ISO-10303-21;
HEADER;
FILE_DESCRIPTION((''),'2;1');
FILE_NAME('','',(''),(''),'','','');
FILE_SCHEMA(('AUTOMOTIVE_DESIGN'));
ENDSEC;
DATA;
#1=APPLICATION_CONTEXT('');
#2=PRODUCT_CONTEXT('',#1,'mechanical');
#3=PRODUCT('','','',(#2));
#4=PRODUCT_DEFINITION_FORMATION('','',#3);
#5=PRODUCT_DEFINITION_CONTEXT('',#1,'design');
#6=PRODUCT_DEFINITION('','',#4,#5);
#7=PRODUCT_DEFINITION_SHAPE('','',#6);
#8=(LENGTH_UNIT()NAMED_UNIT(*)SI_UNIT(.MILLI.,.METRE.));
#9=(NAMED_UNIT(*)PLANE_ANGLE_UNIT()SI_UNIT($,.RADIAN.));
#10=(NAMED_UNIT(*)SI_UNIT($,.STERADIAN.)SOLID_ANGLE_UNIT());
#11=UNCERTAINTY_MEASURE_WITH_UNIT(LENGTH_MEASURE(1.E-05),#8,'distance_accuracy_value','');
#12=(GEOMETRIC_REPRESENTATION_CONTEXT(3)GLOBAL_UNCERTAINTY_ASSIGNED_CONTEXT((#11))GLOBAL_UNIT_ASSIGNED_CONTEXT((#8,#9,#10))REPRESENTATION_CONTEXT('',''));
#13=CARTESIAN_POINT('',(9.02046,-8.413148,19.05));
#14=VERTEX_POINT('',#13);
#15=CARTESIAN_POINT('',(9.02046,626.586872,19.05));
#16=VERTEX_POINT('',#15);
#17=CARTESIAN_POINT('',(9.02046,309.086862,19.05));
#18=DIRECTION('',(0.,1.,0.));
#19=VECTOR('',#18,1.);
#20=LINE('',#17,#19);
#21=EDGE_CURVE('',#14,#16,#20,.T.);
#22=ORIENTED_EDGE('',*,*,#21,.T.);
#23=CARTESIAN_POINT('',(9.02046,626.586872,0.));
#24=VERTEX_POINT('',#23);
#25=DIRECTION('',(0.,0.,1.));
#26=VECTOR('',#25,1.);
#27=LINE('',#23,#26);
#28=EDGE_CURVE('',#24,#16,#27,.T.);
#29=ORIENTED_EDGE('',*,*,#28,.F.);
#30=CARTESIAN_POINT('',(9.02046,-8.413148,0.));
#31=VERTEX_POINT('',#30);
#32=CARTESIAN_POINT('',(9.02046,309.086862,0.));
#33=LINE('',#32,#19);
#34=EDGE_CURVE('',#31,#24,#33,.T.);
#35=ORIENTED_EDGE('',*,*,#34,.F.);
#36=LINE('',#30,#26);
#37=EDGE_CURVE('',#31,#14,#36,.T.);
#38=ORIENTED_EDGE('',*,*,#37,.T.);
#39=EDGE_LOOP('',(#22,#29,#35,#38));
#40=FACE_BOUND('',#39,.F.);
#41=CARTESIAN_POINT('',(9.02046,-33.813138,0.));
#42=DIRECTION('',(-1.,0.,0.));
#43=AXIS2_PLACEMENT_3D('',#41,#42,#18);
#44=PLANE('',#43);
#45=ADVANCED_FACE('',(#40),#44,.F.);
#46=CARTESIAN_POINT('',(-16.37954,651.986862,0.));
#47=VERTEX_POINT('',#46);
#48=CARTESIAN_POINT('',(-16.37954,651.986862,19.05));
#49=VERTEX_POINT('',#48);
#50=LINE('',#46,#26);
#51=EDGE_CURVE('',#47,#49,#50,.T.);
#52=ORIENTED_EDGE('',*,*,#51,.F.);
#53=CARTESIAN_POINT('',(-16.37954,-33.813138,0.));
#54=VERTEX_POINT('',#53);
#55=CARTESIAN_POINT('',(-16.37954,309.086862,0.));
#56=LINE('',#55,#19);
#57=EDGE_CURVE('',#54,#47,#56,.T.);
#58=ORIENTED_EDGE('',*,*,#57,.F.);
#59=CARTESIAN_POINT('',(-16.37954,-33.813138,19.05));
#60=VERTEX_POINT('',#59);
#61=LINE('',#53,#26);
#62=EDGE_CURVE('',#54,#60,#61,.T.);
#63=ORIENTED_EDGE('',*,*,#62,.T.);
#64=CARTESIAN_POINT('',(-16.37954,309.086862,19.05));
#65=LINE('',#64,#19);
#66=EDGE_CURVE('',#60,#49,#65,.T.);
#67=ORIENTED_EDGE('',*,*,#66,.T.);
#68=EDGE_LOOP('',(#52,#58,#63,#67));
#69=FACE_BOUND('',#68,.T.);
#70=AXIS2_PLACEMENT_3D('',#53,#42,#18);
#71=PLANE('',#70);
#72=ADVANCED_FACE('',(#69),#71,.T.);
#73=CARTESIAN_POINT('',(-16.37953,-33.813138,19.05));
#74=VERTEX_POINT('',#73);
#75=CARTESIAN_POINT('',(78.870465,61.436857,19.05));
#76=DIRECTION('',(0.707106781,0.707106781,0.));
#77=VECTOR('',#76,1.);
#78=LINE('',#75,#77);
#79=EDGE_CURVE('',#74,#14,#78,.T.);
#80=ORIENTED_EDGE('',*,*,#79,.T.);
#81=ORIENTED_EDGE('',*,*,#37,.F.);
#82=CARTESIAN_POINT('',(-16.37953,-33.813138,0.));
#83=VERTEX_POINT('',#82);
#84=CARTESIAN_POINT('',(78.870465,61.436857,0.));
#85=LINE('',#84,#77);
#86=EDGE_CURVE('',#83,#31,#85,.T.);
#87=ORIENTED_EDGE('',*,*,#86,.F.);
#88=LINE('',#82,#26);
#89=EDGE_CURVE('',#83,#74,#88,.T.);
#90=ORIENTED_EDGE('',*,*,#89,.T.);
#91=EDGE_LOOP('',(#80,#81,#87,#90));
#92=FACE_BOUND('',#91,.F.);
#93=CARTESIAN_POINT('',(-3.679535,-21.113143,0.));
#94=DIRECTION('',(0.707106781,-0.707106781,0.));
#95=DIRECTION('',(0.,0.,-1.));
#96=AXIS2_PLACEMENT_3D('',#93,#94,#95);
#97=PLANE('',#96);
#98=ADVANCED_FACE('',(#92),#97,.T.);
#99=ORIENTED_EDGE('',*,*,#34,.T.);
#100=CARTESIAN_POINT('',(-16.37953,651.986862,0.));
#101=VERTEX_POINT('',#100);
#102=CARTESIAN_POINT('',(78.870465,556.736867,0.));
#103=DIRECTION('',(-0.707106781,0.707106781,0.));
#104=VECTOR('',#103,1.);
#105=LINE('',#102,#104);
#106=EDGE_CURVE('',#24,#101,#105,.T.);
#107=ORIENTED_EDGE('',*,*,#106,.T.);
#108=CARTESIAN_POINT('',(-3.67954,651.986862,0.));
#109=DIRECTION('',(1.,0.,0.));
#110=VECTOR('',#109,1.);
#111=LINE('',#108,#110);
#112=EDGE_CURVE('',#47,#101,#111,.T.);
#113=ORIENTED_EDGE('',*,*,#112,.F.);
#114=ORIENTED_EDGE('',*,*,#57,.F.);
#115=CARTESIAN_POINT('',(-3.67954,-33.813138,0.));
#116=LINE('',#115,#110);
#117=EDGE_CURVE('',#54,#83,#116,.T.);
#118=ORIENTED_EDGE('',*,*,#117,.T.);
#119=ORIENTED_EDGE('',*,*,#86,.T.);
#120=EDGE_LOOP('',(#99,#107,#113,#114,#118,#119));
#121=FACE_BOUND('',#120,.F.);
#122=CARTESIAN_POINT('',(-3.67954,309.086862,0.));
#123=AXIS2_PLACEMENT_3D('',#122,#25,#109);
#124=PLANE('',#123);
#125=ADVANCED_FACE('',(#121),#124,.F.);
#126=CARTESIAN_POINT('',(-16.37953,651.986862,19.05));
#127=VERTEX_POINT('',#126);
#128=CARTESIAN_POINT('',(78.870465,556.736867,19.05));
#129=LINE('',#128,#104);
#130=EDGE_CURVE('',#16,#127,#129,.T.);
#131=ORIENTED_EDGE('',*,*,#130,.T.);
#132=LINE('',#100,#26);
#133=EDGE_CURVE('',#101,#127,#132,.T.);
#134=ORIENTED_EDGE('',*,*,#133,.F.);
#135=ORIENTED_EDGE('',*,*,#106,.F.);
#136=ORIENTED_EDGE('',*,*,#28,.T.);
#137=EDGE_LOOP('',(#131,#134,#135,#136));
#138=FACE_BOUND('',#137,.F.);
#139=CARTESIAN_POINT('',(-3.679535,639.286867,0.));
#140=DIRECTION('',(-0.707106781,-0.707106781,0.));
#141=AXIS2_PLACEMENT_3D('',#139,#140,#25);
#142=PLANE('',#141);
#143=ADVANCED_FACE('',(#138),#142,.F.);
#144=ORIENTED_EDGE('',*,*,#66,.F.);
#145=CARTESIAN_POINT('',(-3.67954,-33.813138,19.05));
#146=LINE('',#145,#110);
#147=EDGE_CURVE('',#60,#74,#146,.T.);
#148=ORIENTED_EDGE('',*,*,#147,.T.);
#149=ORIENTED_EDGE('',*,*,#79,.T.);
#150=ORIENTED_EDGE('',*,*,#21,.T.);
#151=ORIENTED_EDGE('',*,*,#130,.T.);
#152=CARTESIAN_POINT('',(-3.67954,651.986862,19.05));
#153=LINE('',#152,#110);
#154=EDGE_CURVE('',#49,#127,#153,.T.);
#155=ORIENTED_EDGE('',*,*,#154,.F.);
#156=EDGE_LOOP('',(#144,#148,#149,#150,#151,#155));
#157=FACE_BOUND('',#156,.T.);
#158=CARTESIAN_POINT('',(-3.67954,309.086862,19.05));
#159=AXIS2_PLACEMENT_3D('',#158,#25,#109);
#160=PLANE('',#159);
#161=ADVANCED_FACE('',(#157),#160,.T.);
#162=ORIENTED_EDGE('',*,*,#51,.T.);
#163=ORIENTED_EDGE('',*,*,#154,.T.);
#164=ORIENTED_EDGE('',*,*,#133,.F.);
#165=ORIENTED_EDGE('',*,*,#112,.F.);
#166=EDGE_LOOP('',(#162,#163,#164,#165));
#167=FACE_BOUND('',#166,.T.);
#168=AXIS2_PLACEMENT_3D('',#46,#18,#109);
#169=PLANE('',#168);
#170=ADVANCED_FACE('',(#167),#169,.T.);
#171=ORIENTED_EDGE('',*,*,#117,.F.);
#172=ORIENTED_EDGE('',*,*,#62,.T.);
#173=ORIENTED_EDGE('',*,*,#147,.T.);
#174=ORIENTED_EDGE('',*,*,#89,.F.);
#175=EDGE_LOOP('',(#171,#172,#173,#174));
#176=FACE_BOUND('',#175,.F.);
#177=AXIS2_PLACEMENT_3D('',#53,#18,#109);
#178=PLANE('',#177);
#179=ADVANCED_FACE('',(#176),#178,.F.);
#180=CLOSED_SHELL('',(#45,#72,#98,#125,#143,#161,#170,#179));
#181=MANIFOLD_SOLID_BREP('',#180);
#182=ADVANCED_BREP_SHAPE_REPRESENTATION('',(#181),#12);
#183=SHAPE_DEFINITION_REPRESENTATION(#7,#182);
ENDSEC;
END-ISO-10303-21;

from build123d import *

# Parameters (mm, degrees)
F0_W     = 25.4
F0_H     = 685.8
F1_DEPTH = 19.05
F2_SIZE  = 25.39999


# Not quite as in the source:
# - a fillet or chamfer is up to 0.001 mm smaller than in the source, because OpenCascade refuses the exact size


with BuildPart() as f1:
    # F0 (on Top) → F1 (new body)
    with BuildSketch(Plane.XY):
        with Locations((-3.6795400083, 309.0868617729)):
            Rectangle(F0_W, F0_H)
    extrude(amount=F1_DEPTH)

    # F2 (size 25.4 in the source; OpenCascade refuses exactly that, so slightly less here)
    f2_edges = [f1.edges().sort_by_distance(p)[0] for p in [
        (9.02046, -33.813138, 9.525),
        (9.02046, 651.986862, 9.525),
    ]]
    chamfer(f2_edges, length=F2_SIZE)


solid = f1.part
